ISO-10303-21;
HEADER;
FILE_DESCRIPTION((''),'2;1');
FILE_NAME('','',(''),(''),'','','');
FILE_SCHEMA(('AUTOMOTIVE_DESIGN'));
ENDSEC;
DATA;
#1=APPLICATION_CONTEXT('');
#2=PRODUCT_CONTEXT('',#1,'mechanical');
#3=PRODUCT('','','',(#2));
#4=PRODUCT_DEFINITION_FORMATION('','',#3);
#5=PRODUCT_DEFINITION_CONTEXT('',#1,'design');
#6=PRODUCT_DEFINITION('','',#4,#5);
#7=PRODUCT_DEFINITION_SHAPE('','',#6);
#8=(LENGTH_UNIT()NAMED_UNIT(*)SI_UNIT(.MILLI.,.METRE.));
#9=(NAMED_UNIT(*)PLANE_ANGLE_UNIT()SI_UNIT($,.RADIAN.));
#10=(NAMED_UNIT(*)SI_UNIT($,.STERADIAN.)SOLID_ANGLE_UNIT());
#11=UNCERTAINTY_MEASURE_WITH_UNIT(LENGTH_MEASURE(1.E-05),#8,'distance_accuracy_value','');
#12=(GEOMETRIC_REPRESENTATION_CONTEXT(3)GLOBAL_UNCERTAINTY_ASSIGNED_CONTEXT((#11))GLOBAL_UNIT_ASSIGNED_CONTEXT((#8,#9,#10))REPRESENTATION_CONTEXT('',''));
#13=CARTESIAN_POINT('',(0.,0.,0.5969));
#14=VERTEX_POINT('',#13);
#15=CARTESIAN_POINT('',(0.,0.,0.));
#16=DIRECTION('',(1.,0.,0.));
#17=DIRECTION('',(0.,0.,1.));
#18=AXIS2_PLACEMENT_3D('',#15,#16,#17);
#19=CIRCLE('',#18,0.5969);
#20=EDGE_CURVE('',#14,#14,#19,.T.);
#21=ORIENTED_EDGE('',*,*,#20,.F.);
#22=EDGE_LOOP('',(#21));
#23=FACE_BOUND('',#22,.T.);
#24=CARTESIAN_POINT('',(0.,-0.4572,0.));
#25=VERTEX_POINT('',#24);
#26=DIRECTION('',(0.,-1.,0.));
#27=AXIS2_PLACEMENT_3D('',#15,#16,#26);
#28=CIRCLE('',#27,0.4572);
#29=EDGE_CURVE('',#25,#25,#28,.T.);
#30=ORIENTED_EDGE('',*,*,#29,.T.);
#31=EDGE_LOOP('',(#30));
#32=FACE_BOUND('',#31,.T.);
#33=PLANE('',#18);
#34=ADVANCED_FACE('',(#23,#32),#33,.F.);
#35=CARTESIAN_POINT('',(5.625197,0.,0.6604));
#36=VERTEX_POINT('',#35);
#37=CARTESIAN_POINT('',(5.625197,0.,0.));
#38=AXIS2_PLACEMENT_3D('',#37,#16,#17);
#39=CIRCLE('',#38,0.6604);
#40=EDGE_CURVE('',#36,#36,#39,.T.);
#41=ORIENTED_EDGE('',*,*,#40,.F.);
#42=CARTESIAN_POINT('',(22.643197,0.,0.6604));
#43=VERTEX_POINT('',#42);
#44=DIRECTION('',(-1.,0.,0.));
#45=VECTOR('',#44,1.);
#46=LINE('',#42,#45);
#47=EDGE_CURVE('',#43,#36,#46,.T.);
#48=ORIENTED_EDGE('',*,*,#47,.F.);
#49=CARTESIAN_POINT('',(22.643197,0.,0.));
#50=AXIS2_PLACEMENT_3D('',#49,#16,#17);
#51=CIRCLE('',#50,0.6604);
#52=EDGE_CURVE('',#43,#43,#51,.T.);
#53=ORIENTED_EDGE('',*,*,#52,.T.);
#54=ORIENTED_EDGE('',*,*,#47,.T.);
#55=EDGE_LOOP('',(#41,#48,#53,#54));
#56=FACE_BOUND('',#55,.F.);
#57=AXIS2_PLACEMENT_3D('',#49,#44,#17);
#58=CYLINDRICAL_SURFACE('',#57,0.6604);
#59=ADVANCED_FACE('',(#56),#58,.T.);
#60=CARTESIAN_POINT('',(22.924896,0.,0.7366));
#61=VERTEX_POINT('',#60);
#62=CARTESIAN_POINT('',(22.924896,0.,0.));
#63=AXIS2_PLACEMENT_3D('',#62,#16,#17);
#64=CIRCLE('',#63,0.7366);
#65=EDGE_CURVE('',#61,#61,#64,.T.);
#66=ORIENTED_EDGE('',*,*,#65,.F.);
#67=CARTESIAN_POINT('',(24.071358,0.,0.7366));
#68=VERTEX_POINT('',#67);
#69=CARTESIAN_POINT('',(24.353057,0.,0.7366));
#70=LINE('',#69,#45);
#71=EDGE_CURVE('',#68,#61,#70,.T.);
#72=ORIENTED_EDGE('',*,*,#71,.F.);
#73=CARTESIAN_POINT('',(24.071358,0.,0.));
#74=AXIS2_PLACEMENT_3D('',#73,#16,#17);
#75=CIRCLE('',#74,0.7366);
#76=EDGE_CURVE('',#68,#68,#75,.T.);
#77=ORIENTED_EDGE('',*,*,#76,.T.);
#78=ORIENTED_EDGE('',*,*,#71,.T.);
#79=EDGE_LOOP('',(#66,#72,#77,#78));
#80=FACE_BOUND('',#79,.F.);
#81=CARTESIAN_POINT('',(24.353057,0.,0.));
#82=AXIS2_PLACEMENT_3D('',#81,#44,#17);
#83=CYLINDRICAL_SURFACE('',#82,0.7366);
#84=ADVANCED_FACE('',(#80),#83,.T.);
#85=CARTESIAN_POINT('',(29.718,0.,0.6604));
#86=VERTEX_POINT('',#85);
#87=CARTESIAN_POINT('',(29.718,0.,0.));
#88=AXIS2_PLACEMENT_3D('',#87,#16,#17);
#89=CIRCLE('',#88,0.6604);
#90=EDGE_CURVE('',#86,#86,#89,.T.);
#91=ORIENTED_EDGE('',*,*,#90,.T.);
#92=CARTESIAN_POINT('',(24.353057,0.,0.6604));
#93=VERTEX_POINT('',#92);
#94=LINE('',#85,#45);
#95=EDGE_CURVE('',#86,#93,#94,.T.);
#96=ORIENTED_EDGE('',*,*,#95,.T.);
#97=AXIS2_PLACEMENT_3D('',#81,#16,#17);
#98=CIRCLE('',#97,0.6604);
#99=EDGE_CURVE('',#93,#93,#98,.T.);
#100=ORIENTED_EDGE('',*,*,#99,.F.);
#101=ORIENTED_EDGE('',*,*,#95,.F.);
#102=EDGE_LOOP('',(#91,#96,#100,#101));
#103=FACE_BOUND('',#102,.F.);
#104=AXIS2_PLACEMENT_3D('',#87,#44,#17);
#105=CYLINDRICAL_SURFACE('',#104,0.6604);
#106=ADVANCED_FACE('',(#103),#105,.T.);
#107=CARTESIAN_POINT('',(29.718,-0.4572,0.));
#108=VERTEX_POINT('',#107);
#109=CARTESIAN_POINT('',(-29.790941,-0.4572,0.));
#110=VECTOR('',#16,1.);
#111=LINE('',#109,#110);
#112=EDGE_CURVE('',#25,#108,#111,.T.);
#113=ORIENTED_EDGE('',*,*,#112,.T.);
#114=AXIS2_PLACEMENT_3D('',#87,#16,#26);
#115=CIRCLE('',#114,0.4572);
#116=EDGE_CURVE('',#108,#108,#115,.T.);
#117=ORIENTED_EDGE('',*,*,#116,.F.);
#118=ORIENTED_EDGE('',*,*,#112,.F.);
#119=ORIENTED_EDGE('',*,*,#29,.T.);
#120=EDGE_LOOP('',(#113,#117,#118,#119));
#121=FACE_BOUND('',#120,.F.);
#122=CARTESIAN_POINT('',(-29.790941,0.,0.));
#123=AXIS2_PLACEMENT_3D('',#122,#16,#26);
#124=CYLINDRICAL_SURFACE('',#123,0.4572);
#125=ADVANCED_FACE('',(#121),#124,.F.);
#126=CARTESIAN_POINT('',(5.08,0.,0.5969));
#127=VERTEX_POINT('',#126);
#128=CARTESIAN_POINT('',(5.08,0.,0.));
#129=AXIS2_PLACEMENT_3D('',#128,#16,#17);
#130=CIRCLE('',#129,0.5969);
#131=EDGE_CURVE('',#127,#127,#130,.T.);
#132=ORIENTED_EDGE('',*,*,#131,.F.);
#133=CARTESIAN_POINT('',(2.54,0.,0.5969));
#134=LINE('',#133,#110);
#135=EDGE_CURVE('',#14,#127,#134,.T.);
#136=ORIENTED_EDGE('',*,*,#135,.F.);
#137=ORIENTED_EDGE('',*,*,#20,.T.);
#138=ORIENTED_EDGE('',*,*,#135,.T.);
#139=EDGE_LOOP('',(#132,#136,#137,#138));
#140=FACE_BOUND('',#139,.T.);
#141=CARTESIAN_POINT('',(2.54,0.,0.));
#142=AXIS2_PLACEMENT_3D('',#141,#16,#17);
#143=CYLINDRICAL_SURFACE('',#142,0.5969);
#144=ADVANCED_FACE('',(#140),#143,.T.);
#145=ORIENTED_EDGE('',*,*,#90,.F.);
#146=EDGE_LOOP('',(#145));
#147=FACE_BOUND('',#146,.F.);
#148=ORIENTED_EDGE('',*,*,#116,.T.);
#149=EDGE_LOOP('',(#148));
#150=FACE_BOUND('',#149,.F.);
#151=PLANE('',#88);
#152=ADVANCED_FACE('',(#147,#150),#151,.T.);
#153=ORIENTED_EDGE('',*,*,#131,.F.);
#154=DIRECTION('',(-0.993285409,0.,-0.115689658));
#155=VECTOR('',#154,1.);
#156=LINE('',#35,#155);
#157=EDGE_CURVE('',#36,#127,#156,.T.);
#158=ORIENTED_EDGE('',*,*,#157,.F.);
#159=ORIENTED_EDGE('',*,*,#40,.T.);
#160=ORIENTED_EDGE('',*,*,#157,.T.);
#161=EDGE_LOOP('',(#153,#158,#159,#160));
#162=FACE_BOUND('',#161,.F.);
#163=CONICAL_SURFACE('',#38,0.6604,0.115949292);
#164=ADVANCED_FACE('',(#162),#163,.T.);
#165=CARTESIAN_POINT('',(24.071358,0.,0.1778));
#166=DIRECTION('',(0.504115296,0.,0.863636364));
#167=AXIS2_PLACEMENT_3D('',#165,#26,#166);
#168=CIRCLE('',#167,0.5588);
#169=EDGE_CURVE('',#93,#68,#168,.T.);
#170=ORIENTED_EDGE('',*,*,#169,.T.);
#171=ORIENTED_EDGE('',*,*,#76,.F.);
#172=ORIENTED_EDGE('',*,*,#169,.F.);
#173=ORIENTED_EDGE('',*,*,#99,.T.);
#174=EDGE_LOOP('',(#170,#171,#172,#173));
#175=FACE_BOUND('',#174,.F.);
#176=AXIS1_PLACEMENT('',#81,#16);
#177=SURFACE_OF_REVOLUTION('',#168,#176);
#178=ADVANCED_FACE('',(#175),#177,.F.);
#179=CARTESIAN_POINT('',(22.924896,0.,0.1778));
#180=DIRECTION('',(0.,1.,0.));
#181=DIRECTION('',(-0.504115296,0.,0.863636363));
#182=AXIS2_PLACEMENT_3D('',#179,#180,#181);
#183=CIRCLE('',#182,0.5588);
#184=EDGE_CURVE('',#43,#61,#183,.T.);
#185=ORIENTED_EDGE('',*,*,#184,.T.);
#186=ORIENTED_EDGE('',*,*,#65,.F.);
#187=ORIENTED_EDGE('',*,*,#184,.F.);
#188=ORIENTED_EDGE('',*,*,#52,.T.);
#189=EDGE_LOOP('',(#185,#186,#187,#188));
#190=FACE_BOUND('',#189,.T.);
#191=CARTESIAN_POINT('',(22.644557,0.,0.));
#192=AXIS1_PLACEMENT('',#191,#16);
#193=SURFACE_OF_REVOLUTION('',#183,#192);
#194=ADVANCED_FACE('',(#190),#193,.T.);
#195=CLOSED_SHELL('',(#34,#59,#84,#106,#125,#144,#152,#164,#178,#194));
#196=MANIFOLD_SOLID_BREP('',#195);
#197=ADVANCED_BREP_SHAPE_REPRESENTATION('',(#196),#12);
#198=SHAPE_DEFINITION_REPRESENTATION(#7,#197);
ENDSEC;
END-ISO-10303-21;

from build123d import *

# Parameters (mm, degrees)
F0_W = 5.08
F0_H = 0.5969
F3_D = 0.9144


# Not quite as in the source:
# - a fillet or chamfer that OpenCascade refuses, or shapes differently, is made with other operations: its cross-section is extruded or revolved along the edge and cut away or added


with BuildPart() as f1:
    # F0 (on Front) → F1 (revolve)
    with BuildSketch(Plane.XZ):
        with Locations((2.54, 0.29845)):
            Rectangle(F0_W, F0_H)
        Polygon((5.6251967326, 0.6604), (5.6251967326, 0), (29.718, 0), (29.718, 0.6604), (24.3530571461, 0.6604), (24.3530571461, 0.7366), (22.6445570588, 0.7366), (22.6431967326, 0.6604), align=None)
        Polygon((5.08, 0.5969), (5.08, 0), (5.6251967326, 0), (5.6251967326, 0.6604), align=None)
    revolve(axis=Axis((14.859, 0, 0), (1, 0, 0)))

    # F3 (through all)
    with Locations(Plane(origin=(0, 0, 0), x_dir=(0, 1, 0), z_dir=(-1, 0, 0))):
        with Locations((0, 0)):
            Hole(F3_D / 2)

    # F4: fillet of radius 0.5588 on 1 edges, made by hand

    # F4_s1 → F4_t2 (revolve, cut)
    with BuildSketch(Plane.XZ):
        with BuildLine():
            ThreePointArc((24.3530571461, 0.6604), (24.21726941, 0.7172137188), (24.0713575188, 0.7366))
            Line((24.0713575188, 0.7366), (24.3530571461, 0.7366))
            Line((24.3530571461, 0.7366), (24.3530571461, 0.6604))
        make_face()
    revolve(axis=Axis((24.3530571461, 0, 0), (1, 0, 0)), mode=Mode.SUBTRACT)

    # F5: fillet of radius 0.5588 on 1 edges, made by hand

    # F5_s1 → F5_t2 (revolve, cut)
    with BuildSketch(Plane.XZ):
        with BuildLine():
            ThreePointArc((22.6431967326, 0.6604), (22.7789844686, 0.7172137188), (22.9248963599, 0.7366))
            Line((22.9248963599, 0.7366), (22.6445570588, 0.7366))
            Line((22.6445570588, 0.7366), (22.6431967326, 0.6604))
        make_face()
    revolve(axis=Axis((22.6445570588, 0, 0), (1, 0, 0)), mode=Mode.SUBTRACT)


solid = f1.part
